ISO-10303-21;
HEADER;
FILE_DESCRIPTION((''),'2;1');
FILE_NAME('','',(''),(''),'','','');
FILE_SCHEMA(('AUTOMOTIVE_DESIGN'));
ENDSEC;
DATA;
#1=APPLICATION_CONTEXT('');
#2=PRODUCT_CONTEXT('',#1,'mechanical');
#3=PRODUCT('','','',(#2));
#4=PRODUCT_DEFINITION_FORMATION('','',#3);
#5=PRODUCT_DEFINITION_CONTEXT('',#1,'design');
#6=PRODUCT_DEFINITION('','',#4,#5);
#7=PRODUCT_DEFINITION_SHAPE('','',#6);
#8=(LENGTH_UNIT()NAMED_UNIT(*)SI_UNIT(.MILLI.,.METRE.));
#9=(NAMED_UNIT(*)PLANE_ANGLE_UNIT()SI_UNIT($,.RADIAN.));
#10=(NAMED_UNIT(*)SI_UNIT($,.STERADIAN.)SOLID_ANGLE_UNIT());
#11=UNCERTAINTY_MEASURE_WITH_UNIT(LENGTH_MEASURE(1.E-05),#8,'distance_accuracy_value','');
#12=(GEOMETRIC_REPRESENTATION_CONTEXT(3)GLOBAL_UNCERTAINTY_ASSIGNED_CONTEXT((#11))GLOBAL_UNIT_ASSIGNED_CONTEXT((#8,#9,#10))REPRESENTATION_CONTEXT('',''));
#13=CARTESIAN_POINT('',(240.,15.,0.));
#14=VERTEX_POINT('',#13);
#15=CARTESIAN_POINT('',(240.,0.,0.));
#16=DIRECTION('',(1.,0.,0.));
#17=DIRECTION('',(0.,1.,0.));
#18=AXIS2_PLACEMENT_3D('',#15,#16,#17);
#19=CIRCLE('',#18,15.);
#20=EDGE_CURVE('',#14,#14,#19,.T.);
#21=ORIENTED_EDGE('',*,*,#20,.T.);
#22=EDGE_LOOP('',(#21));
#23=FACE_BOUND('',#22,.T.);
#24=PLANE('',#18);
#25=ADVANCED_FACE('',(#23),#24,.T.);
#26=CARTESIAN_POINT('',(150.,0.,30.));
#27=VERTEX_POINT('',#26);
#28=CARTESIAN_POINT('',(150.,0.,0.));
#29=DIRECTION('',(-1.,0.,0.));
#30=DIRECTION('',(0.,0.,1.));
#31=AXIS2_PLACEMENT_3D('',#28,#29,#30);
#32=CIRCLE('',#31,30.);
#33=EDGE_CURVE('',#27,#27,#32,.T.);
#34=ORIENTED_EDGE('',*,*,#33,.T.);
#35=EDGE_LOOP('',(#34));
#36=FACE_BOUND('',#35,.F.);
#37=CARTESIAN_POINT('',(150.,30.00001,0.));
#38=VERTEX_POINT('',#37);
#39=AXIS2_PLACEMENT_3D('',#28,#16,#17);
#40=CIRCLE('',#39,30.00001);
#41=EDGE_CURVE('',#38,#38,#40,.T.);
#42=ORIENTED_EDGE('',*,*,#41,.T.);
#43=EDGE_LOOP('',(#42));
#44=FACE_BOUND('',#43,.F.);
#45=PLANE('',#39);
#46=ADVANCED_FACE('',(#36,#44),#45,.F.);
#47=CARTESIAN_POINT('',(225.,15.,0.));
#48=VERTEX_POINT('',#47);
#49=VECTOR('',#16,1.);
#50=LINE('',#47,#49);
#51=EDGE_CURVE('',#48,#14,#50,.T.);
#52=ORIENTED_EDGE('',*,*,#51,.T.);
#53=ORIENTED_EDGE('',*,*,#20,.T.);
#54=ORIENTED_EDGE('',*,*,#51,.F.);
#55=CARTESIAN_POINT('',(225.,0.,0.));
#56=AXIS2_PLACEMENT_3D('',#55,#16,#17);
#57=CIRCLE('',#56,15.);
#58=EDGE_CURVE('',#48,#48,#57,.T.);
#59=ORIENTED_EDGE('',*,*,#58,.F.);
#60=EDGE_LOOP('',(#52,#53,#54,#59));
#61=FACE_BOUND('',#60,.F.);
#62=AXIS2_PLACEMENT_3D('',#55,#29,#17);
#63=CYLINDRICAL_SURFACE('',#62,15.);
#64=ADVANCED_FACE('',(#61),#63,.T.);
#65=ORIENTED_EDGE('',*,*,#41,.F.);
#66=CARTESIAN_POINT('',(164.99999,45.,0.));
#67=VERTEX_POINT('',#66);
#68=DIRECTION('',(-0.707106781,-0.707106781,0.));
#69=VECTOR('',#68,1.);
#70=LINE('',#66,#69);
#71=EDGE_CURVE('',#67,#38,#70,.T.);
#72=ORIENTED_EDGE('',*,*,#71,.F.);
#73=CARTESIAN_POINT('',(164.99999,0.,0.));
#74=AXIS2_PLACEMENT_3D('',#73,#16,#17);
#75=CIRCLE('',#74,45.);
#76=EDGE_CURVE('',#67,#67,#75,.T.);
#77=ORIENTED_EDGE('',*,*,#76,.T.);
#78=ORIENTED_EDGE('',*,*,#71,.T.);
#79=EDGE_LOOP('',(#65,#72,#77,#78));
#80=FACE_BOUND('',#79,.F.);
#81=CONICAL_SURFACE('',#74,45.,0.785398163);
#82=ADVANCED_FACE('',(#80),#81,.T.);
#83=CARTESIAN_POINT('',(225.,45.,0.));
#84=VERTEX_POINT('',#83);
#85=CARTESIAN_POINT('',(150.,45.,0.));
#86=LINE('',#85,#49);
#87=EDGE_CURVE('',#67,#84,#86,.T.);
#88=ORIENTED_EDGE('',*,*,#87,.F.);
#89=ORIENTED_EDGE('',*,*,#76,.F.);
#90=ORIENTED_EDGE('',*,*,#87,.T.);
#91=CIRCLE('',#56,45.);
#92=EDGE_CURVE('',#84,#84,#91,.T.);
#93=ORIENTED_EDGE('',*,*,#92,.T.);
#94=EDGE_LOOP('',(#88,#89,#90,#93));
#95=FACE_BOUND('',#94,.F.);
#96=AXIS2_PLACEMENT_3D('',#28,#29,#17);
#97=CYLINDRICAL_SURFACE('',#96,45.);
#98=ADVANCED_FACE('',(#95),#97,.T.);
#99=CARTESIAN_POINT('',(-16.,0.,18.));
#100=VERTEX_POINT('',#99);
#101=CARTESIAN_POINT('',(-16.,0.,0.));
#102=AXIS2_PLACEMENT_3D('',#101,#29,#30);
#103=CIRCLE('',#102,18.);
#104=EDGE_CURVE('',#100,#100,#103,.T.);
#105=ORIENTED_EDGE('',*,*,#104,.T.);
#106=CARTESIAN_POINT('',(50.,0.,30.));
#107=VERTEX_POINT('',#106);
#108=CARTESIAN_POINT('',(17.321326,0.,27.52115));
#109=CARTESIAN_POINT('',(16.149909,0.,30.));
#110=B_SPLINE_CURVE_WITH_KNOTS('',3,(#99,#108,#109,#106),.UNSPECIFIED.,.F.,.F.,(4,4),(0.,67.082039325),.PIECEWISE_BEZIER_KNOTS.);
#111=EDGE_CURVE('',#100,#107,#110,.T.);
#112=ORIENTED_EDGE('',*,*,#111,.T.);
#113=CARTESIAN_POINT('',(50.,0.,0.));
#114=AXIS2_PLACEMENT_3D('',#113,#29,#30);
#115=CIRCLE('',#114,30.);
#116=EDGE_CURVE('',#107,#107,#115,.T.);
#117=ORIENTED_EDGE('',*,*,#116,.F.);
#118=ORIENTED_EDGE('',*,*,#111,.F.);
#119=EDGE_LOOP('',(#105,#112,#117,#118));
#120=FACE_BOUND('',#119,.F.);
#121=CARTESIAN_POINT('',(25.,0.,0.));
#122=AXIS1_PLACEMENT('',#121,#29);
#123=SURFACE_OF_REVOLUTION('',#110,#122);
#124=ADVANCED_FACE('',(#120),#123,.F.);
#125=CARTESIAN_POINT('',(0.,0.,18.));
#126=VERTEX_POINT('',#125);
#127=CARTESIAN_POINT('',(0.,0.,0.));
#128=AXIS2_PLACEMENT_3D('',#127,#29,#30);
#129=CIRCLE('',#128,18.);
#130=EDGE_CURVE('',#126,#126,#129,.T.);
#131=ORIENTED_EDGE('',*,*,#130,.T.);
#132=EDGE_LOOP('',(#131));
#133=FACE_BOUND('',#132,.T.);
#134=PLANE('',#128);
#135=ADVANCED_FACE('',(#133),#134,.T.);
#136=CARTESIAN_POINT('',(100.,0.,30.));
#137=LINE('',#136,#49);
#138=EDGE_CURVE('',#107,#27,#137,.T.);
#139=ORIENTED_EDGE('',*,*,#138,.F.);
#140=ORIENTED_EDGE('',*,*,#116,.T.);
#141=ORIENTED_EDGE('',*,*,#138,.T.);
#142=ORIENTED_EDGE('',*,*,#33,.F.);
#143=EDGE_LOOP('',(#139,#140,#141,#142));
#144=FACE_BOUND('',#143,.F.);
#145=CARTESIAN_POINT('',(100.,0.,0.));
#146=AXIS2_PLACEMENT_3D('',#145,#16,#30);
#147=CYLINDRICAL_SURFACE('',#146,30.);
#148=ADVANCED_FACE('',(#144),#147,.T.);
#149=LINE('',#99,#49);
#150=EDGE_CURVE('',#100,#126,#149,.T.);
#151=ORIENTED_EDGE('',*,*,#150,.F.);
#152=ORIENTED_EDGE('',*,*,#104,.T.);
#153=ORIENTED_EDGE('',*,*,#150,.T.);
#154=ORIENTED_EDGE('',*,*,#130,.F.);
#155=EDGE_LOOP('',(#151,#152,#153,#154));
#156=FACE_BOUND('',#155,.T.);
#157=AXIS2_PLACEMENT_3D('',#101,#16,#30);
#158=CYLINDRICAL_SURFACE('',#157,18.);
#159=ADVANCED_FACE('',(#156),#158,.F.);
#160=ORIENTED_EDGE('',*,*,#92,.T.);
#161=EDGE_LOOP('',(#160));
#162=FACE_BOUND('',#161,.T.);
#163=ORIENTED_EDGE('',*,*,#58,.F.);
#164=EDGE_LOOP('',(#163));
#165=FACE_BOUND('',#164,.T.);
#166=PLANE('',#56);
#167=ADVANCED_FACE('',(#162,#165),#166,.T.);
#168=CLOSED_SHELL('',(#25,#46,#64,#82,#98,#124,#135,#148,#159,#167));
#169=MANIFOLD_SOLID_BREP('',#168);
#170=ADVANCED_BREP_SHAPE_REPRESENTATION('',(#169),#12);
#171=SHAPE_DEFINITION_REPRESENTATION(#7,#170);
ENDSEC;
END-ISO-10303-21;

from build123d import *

# Parameters (mm, degrees)
F0_W     = 100
F0_H     = 30
F3_R     = 45
F3_R_2   = 30
F4_DEPTH = 75
F5_SIZE  = 14.99999
F7_R     = 15
F8_DEPTH = 15


# Not quite as in the source:
# - a fillet or chamfer is up to 0.001 mm smaller than in the source, because OpenCascade refuses the exact size


with BuildPart() as f1:
    # F0 (on Front) → F1 (revolve)
    with BuildSketch(Plane.XZ):
        with BuildLine():
            Line((0, 18), (0, 0))
            Line((0, 0), (50, 0))
            Line((50, 0), (50, 30))
            add(Edge.make_bspline(
                [(-16, 18), (17.3213258386, 27.5211501867), (16.1499090196, 30), (50, 30)],
                knots=[0, 0, 0, 0, 67.082039325, 67.082039325, 67.082039325, 67.082039325], degree=3))
            Line((-16, 18), (0, 18))
        make_face()
        with Locations((100, 15)):
            Rectangle(F0_W, F0_H)
    revolve(axis=Axis((25, 0, 0), (-1, 0, 0)))

    # F3 (on offset) → F4 (join)
    with BuildSketch(Plane.YZ.offset(150)):
        Circle(F3_R)
        Circle(F3_R_2, mode=Mode.SUBTRACT)
        Circle(F3_R_2)
    extrude(amount=F4_DEPTH)

    # F5 (size 15 in the source; OpenCascade refuses exactly that, so slightly less here)
    f5_edges = [f1.edges().sort_by_distance(p)[0] for p in [
        (150, -45, 0),
    ]]
    chamfer(f5_edges, length=F5_SIZE)

    # F7 (on offset) → F8 (join)
    with BuildSketch(Plane.YZ.offset(225)):
        Circle(F7_R)
    extrude(amount=F8_DEPTH)


solid = f1.part
